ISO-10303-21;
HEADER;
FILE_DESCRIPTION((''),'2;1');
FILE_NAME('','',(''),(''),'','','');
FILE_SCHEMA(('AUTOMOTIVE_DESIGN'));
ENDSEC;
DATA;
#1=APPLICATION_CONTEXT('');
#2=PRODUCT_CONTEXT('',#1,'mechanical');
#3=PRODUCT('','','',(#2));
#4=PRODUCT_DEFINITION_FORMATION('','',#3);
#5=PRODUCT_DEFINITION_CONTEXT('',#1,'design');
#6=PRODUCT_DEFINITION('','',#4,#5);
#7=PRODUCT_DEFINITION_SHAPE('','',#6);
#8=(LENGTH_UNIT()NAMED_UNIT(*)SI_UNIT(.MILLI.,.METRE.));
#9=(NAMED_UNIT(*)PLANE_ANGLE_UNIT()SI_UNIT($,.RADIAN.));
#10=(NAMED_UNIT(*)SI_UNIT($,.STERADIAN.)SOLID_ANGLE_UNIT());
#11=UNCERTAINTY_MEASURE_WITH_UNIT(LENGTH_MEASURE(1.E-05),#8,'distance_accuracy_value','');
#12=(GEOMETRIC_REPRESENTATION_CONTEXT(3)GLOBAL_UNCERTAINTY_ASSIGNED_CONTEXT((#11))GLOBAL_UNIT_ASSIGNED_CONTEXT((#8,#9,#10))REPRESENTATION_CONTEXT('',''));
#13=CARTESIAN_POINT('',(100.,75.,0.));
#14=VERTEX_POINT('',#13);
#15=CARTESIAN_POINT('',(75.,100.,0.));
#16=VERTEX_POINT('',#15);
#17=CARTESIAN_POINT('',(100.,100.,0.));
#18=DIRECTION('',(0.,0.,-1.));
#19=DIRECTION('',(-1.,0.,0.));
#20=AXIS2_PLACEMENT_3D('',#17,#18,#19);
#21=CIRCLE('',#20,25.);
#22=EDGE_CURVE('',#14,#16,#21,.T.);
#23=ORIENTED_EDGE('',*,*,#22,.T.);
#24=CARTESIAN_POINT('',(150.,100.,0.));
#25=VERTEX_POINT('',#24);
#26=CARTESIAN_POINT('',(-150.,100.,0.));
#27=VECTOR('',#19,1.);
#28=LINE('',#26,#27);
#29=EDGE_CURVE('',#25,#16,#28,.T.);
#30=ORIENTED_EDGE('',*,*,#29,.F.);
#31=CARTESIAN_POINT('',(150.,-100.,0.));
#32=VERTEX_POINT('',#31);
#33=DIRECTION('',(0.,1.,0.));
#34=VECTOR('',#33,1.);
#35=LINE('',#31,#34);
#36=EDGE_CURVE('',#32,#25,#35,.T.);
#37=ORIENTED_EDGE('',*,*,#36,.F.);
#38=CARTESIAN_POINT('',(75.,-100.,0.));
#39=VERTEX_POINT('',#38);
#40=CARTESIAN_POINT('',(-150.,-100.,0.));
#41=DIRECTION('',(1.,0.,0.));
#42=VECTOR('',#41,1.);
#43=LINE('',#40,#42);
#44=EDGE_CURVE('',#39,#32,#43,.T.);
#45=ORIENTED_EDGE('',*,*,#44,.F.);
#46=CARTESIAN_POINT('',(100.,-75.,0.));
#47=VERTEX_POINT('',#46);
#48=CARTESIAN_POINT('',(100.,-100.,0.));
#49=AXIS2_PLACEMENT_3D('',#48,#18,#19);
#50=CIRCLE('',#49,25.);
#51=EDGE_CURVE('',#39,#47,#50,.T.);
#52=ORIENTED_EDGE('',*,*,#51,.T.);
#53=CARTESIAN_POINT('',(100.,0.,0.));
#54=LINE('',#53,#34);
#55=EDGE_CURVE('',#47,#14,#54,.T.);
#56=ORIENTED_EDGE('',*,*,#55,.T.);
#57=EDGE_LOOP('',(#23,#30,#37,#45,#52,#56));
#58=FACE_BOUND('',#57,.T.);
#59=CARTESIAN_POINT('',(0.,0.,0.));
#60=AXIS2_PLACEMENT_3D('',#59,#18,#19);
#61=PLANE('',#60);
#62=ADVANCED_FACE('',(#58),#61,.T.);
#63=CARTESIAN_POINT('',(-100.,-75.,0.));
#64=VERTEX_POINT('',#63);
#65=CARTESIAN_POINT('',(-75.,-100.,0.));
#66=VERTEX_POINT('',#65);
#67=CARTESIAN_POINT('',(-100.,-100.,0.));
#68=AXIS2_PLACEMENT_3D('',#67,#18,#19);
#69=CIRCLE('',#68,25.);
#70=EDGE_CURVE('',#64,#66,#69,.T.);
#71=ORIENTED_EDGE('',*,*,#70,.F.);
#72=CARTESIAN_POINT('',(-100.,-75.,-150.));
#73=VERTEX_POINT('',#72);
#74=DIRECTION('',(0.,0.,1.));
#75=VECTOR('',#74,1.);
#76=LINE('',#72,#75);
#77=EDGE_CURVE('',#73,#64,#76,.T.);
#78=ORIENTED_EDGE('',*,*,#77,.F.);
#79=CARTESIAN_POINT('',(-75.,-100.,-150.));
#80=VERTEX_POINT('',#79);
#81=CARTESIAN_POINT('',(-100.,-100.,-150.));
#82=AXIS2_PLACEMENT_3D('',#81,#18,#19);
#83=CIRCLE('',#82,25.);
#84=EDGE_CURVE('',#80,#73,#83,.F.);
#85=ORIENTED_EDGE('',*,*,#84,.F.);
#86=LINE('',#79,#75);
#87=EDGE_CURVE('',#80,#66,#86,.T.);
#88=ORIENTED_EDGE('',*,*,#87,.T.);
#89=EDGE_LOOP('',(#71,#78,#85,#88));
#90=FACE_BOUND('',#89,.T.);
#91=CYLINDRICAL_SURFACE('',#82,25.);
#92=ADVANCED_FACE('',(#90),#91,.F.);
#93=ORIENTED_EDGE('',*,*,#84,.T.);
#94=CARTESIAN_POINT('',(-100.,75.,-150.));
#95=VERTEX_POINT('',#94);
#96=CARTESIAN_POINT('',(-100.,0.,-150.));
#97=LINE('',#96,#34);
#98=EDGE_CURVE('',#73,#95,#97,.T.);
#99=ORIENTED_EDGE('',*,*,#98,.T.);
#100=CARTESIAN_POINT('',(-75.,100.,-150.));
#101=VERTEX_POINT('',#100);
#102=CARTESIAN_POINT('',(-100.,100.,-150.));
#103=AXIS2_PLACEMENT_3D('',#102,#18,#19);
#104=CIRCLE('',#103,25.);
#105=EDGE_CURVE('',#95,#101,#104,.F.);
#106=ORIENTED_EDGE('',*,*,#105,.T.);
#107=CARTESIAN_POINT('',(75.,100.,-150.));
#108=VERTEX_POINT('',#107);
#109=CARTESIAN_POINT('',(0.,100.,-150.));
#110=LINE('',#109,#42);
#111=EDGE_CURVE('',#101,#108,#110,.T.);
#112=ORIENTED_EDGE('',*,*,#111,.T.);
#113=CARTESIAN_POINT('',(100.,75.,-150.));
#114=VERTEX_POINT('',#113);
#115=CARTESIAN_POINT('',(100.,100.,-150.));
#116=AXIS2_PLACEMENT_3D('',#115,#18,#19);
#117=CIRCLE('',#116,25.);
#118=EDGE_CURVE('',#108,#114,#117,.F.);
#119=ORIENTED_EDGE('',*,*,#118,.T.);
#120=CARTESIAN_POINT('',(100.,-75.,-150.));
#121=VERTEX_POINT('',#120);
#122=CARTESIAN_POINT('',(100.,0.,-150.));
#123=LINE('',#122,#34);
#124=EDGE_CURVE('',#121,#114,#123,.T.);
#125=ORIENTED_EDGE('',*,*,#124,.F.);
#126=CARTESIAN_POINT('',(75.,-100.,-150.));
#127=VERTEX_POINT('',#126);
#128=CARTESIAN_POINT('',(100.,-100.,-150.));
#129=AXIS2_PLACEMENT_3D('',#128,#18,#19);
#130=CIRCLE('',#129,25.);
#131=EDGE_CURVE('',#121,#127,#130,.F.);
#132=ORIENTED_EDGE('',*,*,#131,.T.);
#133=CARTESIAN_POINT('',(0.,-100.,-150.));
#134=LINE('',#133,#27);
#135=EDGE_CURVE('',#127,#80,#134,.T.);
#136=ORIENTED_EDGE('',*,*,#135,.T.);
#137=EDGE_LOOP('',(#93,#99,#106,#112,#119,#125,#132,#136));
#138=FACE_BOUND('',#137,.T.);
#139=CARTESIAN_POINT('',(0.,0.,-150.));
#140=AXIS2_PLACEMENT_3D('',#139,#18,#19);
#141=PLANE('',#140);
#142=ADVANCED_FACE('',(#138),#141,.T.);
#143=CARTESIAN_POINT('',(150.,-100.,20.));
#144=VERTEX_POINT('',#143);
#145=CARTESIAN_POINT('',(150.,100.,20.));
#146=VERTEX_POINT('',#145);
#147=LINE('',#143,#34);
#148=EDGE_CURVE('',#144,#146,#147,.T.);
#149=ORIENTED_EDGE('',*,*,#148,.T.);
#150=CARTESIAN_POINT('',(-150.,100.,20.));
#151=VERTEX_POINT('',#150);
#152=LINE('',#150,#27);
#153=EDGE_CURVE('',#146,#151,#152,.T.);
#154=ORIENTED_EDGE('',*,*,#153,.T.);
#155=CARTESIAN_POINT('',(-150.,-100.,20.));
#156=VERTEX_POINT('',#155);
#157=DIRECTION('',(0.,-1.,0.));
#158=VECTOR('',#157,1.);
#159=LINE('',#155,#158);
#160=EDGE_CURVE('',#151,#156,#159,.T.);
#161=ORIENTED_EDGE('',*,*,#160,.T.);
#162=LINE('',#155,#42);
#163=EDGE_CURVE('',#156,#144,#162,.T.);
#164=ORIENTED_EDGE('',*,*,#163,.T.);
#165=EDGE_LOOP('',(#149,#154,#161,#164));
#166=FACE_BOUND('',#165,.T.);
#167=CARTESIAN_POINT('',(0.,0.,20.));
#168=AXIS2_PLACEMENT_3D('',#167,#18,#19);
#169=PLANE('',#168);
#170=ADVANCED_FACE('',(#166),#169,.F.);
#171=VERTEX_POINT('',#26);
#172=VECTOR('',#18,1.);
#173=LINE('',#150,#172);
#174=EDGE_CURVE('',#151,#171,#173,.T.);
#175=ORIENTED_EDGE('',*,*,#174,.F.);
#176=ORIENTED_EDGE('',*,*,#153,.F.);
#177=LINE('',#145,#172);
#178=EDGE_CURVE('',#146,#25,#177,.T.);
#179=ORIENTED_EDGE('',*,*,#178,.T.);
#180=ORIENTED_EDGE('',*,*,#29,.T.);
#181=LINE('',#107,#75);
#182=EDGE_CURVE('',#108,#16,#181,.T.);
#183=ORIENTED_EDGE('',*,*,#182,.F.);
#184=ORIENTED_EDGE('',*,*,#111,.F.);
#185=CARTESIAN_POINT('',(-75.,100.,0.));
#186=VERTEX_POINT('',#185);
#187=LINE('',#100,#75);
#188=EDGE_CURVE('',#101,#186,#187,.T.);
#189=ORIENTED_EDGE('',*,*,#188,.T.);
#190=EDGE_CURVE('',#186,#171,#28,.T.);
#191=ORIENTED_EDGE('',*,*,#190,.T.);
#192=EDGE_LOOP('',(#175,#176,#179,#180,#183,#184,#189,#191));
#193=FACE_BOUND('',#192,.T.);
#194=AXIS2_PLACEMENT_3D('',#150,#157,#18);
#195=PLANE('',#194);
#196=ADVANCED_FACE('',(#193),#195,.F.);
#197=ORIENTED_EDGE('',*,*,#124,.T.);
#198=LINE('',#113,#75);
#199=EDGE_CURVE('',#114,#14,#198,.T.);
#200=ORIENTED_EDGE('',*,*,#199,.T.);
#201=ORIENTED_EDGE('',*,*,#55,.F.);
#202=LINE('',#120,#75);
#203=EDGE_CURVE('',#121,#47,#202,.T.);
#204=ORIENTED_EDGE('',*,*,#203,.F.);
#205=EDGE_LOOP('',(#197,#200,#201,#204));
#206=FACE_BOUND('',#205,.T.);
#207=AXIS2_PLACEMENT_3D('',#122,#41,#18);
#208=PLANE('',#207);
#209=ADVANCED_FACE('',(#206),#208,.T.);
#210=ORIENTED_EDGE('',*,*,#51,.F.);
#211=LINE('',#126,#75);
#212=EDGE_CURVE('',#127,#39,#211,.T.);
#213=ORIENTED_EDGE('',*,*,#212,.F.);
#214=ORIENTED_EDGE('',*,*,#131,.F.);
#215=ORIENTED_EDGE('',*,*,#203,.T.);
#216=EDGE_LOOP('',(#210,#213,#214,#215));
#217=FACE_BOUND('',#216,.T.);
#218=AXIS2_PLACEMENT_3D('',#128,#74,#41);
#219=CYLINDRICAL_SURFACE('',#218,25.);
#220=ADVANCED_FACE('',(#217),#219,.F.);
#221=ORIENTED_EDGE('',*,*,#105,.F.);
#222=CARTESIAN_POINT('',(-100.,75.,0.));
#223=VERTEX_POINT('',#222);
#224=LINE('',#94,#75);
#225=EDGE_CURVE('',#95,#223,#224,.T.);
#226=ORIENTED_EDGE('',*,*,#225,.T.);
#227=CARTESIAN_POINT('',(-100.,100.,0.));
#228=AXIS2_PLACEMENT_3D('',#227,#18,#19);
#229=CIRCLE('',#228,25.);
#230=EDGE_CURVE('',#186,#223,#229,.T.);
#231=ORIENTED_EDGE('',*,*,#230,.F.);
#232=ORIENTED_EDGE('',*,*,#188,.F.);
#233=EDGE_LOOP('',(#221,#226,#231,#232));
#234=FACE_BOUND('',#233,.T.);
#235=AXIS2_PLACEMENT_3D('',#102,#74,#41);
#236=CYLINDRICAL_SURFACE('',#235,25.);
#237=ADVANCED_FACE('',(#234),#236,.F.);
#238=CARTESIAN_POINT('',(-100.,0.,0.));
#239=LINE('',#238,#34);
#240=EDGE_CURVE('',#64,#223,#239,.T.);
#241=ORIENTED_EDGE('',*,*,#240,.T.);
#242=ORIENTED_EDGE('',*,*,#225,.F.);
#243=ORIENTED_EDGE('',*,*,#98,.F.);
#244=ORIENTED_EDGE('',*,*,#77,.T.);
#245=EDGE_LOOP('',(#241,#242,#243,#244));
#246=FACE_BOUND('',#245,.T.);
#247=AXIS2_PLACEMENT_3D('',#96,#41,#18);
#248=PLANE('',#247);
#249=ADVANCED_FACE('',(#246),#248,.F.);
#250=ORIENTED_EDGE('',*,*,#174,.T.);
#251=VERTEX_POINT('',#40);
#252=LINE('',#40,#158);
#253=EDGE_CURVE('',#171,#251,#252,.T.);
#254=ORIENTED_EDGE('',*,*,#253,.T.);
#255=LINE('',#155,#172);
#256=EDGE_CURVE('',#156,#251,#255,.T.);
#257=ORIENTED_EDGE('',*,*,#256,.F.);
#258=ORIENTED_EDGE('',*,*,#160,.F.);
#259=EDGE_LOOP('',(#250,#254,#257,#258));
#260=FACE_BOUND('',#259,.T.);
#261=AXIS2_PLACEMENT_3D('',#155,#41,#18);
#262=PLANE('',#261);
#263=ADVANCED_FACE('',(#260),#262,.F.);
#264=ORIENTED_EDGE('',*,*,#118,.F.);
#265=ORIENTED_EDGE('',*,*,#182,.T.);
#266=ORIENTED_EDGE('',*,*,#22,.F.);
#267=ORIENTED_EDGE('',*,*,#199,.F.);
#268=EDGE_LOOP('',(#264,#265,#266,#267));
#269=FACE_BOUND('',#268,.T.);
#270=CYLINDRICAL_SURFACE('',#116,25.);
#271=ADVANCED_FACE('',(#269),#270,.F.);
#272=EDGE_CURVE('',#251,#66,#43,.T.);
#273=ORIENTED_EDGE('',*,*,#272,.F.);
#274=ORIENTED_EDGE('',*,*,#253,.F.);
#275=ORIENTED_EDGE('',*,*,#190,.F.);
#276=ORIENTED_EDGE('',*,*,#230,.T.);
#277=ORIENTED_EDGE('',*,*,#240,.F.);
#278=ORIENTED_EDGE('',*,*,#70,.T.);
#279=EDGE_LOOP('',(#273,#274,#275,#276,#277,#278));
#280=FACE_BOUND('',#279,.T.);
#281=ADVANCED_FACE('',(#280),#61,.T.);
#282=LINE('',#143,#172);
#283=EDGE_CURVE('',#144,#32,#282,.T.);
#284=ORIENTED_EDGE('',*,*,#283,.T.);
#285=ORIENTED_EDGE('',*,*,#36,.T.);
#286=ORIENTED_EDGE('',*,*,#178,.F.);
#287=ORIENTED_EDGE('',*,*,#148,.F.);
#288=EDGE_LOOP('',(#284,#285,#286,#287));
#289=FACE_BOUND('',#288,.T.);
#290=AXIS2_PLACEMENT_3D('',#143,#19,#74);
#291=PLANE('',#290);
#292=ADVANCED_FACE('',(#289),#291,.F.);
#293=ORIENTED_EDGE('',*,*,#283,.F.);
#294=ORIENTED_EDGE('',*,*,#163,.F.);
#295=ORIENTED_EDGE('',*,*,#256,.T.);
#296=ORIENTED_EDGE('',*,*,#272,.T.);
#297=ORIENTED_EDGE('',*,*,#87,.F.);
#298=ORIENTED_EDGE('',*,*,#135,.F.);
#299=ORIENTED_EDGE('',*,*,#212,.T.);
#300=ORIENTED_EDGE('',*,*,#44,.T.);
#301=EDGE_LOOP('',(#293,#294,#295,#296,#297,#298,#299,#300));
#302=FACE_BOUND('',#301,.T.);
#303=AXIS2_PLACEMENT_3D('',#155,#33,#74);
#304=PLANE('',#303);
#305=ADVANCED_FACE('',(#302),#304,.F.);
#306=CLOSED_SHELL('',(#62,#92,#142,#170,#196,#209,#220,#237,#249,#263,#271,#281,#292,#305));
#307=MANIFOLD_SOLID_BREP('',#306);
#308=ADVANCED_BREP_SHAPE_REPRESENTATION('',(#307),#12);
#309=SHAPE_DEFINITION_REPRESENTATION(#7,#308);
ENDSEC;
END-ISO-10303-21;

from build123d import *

# Parameters (mm, degrees)
SKETCH1_W           = 300
SKETCH1_H           = 200
BOSS_EXTRUDE1_DEPTH = 20
SKETCH2_W           = 150
SKETCH2_H           = 25
SKETCH2_H_2         = 150
SKETCH2_W_2         = 25
BOSS_EXTRUDE2_DEPTH = 150
FILLET1_R           = 25
FILLET2_R           = 25


with BuildPart() as part:
    # Sketch1 → Boss-Extrude1 (new body)
    with BuildSketch(Plane.XY):
        Rectangle(SKETCH1_W, SKETCH1_H)
    extrude(amount=BOSS_EXTRUDE1_DEPTH)

    # Sketch2 → Boss-Extrude2 (add)
    with BuildSketch(Plane(origin=(0, 0, 0), x_dir=(-1, 0, 0), z_dir=(0, 0, -1))):
        with Locations((0, 87.5)):
            Rectangle(SKETCH2_W, SKETCH2_H)
        Rectangle(SKETCH2_W, SKETCH2_H_2)
        with Locations((-87.5, 0)):
            Rectangle(SKETCH2_W_2, SKETCH2_H_2)
        with Locations((87.5, 0)):
            Rectangle(SKETCH2_W_2, SKETCH2_H_2)
        with Locations((0, -87.5)):
            Rectangle(SKETCH2_W, SKETCH2_H)
    extrude(amount=BOSS_EXTRUDE2_DEPTH)

    # Fillet1
    fillet1_edges = [part.edges().sort_by_distance(p)[0] for p in [
        (75, 75, -75),
    ]]
    fillet(fillet1_edges, radius=FILLET1_R - 0.0001)  # a hair under: the kernel refuses the full size

    # Fillet2
    fillet2_edges = [part.edges().sort_by_distance(p)[0] for p in [
        (75, -75, -75),
        (-75, -75, -75),
        (-75, 75, -75),
    ]]
    fillet(fillet2_edges, radius=FILLET2_R - 0.0001)  # a hair under: the kernel refuses the full size


solid = part.part
